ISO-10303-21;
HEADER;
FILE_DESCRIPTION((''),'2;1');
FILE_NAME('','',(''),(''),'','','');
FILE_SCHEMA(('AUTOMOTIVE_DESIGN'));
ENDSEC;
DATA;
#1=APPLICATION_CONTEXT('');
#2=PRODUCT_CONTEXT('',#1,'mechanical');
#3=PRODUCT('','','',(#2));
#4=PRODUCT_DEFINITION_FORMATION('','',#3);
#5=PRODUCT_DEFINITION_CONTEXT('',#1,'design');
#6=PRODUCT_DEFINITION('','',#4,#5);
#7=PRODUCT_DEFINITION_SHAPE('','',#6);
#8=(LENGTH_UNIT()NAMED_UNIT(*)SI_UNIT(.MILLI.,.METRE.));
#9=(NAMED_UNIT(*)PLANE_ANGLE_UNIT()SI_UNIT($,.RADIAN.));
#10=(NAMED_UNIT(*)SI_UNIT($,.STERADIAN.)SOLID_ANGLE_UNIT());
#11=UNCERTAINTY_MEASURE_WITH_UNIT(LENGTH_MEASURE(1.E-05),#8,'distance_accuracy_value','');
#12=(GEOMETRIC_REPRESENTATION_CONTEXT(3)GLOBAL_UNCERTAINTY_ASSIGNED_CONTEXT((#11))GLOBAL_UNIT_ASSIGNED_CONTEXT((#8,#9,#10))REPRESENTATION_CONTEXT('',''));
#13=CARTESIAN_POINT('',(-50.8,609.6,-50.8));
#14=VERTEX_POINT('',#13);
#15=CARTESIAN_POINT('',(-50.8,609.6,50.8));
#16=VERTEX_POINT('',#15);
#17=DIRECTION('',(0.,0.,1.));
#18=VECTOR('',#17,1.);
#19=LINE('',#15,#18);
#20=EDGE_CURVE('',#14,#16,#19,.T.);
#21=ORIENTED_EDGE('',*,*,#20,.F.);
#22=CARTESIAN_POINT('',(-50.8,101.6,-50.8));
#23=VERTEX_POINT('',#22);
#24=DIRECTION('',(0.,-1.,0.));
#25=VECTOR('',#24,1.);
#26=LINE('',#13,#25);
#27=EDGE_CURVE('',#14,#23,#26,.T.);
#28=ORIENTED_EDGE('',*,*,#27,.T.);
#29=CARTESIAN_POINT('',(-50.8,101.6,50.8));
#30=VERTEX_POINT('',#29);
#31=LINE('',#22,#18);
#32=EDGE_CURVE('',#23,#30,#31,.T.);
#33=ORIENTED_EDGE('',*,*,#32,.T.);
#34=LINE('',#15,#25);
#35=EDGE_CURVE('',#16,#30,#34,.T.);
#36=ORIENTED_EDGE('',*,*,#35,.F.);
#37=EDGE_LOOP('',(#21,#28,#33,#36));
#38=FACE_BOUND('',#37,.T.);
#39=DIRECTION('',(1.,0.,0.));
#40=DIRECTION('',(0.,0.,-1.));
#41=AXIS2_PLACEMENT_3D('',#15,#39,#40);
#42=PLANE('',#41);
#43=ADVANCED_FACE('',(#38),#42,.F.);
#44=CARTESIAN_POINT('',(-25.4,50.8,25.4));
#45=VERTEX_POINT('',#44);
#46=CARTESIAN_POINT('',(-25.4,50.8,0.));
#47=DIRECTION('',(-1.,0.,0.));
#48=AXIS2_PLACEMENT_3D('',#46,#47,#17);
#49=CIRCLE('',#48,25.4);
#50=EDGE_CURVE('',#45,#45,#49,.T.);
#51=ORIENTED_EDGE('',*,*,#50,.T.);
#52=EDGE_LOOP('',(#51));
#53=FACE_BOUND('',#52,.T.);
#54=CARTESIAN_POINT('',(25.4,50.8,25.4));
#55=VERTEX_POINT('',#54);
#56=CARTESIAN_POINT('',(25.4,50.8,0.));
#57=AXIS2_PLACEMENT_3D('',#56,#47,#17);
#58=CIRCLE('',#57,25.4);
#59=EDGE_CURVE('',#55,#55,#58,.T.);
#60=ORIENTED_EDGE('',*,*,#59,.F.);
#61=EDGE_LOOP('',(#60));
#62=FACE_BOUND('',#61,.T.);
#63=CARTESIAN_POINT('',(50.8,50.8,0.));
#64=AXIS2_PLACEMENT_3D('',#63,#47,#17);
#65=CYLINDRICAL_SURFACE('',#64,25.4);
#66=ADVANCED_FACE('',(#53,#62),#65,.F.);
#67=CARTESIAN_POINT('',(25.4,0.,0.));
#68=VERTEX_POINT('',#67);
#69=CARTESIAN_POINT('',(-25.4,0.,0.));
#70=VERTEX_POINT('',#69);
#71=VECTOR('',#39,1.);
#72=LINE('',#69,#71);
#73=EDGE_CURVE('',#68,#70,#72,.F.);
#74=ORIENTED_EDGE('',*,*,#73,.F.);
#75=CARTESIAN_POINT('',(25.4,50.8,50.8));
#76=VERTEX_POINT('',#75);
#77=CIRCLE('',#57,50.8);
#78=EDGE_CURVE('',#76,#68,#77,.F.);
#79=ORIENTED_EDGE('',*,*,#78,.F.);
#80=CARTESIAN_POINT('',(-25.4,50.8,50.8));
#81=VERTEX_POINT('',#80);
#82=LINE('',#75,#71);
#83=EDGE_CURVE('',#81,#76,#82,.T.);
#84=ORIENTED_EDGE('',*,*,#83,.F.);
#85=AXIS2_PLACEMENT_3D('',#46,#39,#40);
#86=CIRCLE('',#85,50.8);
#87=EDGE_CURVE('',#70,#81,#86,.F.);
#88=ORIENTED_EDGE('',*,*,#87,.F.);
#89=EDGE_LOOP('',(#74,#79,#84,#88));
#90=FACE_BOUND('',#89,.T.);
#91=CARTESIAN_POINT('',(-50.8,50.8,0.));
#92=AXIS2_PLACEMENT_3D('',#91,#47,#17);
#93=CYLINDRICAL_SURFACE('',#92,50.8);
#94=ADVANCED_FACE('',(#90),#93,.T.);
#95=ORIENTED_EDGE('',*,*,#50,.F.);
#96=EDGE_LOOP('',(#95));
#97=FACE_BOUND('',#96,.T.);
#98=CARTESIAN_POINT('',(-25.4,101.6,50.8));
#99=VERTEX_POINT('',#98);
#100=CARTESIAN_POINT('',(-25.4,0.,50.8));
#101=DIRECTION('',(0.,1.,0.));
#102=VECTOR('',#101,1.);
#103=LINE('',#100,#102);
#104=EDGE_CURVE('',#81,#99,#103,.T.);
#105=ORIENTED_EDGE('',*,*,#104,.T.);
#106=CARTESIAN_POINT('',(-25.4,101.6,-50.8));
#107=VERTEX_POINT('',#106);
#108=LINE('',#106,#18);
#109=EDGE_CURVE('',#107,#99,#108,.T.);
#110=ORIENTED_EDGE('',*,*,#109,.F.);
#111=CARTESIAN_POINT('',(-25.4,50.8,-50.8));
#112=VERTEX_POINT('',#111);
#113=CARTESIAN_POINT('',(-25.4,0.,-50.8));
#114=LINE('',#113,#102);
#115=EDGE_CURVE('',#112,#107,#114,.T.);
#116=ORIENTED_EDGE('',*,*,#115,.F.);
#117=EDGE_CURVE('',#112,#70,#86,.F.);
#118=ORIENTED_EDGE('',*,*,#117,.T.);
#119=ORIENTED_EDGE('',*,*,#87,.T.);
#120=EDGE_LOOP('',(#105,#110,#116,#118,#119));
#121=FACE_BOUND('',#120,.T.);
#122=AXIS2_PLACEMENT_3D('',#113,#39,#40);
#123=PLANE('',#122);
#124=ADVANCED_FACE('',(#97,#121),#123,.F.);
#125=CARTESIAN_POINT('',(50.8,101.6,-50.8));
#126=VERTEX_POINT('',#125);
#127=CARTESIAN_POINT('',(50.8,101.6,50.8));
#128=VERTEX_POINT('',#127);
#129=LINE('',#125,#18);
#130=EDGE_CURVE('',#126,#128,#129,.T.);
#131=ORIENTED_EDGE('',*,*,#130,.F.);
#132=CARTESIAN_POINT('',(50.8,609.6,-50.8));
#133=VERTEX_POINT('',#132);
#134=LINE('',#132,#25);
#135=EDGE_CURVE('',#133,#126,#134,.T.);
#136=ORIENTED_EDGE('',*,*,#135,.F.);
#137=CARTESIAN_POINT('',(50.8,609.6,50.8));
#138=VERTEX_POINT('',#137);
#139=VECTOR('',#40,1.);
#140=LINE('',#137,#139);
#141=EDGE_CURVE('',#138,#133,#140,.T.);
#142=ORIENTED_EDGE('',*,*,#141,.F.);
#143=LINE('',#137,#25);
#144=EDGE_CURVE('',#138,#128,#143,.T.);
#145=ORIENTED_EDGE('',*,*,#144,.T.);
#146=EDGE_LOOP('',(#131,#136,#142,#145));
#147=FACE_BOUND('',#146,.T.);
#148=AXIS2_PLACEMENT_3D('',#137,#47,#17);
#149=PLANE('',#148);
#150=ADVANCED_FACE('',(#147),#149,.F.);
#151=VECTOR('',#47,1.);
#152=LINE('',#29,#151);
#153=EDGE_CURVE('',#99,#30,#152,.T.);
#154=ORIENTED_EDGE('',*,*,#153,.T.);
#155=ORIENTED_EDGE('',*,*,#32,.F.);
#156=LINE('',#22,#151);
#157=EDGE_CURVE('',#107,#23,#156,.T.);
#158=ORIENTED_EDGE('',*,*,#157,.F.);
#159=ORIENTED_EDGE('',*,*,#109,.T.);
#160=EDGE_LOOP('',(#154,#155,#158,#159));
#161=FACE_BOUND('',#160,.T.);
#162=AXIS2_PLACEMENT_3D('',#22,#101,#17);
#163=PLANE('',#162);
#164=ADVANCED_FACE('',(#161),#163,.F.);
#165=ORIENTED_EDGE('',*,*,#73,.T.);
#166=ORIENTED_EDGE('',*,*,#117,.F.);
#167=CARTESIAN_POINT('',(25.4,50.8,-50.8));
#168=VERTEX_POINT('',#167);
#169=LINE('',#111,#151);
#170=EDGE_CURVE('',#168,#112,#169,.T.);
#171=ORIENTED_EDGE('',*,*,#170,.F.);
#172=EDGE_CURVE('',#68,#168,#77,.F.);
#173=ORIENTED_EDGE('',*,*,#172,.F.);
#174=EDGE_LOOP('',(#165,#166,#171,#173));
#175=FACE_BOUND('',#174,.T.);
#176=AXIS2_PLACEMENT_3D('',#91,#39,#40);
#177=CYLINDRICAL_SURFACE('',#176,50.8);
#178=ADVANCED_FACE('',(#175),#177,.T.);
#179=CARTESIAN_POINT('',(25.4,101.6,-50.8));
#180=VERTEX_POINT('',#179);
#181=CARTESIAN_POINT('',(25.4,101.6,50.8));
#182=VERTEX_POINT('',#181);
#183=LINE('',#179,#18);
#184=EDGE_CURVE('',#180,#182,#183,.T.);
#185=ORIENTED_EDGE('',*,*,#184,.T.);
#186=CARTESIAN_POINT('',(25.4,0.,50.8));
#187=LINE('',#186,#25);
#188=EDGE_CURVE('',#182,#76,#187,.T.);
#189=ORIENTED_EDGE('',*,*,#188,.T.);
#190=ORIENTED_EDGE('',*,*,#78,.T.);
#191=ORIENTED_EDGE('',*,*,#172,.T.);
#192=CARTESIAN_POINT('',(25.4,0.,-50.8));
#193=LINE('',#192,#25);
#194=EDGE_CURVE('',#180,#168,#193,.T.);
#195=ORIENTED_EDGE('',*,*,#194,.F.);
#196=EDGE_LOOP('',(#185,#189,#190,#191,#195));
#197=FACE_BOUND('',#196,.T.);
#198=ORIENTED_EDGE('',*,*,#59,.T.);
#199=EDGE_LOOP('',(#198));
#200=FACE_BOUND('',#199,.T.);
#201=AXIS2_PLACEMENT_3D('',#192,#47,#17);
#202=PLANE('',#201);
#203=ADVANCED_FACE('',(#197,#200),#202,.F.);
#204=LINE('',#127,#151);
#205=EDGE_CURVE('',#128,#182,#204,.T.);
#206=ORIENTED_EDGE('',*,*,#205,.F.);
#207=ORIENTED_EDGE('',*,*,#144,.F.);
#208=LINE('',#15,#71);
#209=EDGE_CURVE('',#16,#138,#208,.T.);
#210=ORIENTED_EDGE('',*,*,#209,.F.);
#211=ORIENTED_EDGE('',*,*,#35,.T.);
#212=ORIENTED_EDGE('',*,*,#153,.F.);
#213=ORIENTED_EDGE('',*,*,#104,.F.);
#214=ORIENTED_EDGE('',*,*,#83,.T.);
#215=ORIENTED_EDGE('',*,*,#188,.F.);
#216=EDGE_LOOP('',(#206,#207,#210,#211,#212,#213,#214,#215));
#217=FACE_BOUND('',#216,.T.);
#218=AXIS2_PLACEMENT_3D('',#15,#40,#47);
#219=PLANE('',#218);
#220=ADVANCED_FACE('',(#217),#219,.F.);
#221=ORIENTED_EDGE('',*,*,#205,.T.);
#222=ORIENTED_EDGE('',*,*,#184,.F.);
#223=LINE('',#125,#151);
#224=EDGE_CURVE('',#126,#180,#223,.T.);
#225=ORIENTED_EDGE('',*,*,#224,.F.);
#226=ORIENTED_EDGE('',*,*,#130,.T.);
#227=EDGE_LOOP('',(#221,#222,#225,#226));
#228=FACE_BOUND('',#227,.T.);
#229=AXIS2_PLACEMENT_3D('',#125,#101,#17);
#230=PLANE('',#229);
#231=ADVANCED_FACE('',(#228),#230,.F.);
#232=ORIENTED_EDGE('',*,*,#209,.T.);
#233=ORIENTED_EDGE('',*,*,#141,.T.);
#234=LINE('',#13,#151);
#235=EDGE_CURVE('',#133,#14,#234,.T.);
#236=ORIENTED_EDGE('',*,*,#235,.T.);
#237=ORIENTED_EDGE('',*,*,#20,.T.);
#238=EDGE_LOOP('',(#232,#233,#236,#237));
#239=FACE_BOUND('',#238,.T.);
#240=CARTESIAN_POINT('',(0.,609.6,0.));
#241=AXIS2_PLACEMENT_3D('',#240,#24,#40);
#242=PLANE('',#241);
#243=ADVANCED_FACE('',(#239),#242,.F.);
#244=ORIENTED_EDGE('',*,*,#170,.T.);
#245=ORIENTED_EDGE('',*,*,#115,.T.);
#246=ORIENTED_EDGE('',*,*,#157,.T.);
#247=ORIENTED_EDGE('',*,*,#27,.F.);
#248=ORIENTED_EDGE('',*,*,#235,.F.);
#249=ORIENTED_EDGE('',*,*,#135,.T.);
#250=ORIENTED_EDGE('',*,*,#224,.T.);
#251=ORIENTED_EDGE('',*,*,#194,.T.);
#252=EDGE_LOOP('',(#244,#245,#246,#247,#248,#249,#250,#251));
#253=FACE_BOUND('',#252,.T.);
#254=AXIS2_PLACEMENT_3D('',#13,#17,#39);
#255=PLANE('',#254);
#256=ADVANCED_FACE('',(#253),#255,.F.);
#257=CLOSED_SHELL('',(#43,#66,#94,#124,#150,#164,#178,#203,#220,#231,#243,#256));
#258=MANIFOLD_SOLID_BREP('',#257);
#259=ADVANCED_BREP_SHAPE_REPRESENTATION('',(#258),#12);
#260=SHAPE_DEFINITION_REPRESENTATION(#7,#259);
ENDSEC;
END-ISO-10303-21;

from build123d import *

# Parameters (mm, degrees)
SKETCH1_W           = 101.6
SKETCH1_H           = 101.6
BOSS_EXTRUDE1_DEPTH = 609.6
SKETCH2_W           = 25.4
SKETCH2_H           = 101.6
CUT_EXTRUDE1_DEPTH  = 621.093025279
FILLET1_R           = 50.8
SKETCH3_R           = 25.4
CUT_EXTRUDE2_DEPTH  = 617.440783855


with BuildPart() as part:
    # Sketch1 → Boss-Extrude1 (new body)
    with BuildSketch(Plane(origin=(0, 0, 0), x_dir=(1, 0, 0), z_dir=(0, 1, 0))):
        Rectangle(SKETCH1_W, SKETCH1_H)
    extrude(amount=BOSS_EXTRUDE1_DEPTH)

    # Sketch2 → Cut-Extrude1 (cut, through all)
    with BuildSketch(Plane.XY.offset(50.8)):
        with Locations((-38.1, 50.8)):
            Rectangle(SKETCH2_W, SKETCH2_H)
        with Locations((38.1, 50.8)):
            Rectangle(SKETCH2_W, SKETCH2_H)
    extrude(amount=-CUT_EXTRUDE1_DEPTH, mode=Mode.SUBTRACT)

    # Fillet1
    fillet1_edges = [part.edges().sort_by_distance(p)[0] for p in [
        (0, 0, -50.8),
        (0, 0, 50.8),
    ]]
    fillet(fillet1_edges, radius=FILLET1_R - 0.0001)  # a hair under: the kernel refuses the full size

    # Sketch3 → Cut-Extrude2 (cut, through all)
    with BuildSketch(Plane.ZY.offset(25.4)):
        with Locations((0, 50.8)):
            Circle(SKETCH3_R)
    extrude(amount=-CUT_EXTRUDE2_DEPTH, mode=Mode.SUBTRACT)


solid = part.part
